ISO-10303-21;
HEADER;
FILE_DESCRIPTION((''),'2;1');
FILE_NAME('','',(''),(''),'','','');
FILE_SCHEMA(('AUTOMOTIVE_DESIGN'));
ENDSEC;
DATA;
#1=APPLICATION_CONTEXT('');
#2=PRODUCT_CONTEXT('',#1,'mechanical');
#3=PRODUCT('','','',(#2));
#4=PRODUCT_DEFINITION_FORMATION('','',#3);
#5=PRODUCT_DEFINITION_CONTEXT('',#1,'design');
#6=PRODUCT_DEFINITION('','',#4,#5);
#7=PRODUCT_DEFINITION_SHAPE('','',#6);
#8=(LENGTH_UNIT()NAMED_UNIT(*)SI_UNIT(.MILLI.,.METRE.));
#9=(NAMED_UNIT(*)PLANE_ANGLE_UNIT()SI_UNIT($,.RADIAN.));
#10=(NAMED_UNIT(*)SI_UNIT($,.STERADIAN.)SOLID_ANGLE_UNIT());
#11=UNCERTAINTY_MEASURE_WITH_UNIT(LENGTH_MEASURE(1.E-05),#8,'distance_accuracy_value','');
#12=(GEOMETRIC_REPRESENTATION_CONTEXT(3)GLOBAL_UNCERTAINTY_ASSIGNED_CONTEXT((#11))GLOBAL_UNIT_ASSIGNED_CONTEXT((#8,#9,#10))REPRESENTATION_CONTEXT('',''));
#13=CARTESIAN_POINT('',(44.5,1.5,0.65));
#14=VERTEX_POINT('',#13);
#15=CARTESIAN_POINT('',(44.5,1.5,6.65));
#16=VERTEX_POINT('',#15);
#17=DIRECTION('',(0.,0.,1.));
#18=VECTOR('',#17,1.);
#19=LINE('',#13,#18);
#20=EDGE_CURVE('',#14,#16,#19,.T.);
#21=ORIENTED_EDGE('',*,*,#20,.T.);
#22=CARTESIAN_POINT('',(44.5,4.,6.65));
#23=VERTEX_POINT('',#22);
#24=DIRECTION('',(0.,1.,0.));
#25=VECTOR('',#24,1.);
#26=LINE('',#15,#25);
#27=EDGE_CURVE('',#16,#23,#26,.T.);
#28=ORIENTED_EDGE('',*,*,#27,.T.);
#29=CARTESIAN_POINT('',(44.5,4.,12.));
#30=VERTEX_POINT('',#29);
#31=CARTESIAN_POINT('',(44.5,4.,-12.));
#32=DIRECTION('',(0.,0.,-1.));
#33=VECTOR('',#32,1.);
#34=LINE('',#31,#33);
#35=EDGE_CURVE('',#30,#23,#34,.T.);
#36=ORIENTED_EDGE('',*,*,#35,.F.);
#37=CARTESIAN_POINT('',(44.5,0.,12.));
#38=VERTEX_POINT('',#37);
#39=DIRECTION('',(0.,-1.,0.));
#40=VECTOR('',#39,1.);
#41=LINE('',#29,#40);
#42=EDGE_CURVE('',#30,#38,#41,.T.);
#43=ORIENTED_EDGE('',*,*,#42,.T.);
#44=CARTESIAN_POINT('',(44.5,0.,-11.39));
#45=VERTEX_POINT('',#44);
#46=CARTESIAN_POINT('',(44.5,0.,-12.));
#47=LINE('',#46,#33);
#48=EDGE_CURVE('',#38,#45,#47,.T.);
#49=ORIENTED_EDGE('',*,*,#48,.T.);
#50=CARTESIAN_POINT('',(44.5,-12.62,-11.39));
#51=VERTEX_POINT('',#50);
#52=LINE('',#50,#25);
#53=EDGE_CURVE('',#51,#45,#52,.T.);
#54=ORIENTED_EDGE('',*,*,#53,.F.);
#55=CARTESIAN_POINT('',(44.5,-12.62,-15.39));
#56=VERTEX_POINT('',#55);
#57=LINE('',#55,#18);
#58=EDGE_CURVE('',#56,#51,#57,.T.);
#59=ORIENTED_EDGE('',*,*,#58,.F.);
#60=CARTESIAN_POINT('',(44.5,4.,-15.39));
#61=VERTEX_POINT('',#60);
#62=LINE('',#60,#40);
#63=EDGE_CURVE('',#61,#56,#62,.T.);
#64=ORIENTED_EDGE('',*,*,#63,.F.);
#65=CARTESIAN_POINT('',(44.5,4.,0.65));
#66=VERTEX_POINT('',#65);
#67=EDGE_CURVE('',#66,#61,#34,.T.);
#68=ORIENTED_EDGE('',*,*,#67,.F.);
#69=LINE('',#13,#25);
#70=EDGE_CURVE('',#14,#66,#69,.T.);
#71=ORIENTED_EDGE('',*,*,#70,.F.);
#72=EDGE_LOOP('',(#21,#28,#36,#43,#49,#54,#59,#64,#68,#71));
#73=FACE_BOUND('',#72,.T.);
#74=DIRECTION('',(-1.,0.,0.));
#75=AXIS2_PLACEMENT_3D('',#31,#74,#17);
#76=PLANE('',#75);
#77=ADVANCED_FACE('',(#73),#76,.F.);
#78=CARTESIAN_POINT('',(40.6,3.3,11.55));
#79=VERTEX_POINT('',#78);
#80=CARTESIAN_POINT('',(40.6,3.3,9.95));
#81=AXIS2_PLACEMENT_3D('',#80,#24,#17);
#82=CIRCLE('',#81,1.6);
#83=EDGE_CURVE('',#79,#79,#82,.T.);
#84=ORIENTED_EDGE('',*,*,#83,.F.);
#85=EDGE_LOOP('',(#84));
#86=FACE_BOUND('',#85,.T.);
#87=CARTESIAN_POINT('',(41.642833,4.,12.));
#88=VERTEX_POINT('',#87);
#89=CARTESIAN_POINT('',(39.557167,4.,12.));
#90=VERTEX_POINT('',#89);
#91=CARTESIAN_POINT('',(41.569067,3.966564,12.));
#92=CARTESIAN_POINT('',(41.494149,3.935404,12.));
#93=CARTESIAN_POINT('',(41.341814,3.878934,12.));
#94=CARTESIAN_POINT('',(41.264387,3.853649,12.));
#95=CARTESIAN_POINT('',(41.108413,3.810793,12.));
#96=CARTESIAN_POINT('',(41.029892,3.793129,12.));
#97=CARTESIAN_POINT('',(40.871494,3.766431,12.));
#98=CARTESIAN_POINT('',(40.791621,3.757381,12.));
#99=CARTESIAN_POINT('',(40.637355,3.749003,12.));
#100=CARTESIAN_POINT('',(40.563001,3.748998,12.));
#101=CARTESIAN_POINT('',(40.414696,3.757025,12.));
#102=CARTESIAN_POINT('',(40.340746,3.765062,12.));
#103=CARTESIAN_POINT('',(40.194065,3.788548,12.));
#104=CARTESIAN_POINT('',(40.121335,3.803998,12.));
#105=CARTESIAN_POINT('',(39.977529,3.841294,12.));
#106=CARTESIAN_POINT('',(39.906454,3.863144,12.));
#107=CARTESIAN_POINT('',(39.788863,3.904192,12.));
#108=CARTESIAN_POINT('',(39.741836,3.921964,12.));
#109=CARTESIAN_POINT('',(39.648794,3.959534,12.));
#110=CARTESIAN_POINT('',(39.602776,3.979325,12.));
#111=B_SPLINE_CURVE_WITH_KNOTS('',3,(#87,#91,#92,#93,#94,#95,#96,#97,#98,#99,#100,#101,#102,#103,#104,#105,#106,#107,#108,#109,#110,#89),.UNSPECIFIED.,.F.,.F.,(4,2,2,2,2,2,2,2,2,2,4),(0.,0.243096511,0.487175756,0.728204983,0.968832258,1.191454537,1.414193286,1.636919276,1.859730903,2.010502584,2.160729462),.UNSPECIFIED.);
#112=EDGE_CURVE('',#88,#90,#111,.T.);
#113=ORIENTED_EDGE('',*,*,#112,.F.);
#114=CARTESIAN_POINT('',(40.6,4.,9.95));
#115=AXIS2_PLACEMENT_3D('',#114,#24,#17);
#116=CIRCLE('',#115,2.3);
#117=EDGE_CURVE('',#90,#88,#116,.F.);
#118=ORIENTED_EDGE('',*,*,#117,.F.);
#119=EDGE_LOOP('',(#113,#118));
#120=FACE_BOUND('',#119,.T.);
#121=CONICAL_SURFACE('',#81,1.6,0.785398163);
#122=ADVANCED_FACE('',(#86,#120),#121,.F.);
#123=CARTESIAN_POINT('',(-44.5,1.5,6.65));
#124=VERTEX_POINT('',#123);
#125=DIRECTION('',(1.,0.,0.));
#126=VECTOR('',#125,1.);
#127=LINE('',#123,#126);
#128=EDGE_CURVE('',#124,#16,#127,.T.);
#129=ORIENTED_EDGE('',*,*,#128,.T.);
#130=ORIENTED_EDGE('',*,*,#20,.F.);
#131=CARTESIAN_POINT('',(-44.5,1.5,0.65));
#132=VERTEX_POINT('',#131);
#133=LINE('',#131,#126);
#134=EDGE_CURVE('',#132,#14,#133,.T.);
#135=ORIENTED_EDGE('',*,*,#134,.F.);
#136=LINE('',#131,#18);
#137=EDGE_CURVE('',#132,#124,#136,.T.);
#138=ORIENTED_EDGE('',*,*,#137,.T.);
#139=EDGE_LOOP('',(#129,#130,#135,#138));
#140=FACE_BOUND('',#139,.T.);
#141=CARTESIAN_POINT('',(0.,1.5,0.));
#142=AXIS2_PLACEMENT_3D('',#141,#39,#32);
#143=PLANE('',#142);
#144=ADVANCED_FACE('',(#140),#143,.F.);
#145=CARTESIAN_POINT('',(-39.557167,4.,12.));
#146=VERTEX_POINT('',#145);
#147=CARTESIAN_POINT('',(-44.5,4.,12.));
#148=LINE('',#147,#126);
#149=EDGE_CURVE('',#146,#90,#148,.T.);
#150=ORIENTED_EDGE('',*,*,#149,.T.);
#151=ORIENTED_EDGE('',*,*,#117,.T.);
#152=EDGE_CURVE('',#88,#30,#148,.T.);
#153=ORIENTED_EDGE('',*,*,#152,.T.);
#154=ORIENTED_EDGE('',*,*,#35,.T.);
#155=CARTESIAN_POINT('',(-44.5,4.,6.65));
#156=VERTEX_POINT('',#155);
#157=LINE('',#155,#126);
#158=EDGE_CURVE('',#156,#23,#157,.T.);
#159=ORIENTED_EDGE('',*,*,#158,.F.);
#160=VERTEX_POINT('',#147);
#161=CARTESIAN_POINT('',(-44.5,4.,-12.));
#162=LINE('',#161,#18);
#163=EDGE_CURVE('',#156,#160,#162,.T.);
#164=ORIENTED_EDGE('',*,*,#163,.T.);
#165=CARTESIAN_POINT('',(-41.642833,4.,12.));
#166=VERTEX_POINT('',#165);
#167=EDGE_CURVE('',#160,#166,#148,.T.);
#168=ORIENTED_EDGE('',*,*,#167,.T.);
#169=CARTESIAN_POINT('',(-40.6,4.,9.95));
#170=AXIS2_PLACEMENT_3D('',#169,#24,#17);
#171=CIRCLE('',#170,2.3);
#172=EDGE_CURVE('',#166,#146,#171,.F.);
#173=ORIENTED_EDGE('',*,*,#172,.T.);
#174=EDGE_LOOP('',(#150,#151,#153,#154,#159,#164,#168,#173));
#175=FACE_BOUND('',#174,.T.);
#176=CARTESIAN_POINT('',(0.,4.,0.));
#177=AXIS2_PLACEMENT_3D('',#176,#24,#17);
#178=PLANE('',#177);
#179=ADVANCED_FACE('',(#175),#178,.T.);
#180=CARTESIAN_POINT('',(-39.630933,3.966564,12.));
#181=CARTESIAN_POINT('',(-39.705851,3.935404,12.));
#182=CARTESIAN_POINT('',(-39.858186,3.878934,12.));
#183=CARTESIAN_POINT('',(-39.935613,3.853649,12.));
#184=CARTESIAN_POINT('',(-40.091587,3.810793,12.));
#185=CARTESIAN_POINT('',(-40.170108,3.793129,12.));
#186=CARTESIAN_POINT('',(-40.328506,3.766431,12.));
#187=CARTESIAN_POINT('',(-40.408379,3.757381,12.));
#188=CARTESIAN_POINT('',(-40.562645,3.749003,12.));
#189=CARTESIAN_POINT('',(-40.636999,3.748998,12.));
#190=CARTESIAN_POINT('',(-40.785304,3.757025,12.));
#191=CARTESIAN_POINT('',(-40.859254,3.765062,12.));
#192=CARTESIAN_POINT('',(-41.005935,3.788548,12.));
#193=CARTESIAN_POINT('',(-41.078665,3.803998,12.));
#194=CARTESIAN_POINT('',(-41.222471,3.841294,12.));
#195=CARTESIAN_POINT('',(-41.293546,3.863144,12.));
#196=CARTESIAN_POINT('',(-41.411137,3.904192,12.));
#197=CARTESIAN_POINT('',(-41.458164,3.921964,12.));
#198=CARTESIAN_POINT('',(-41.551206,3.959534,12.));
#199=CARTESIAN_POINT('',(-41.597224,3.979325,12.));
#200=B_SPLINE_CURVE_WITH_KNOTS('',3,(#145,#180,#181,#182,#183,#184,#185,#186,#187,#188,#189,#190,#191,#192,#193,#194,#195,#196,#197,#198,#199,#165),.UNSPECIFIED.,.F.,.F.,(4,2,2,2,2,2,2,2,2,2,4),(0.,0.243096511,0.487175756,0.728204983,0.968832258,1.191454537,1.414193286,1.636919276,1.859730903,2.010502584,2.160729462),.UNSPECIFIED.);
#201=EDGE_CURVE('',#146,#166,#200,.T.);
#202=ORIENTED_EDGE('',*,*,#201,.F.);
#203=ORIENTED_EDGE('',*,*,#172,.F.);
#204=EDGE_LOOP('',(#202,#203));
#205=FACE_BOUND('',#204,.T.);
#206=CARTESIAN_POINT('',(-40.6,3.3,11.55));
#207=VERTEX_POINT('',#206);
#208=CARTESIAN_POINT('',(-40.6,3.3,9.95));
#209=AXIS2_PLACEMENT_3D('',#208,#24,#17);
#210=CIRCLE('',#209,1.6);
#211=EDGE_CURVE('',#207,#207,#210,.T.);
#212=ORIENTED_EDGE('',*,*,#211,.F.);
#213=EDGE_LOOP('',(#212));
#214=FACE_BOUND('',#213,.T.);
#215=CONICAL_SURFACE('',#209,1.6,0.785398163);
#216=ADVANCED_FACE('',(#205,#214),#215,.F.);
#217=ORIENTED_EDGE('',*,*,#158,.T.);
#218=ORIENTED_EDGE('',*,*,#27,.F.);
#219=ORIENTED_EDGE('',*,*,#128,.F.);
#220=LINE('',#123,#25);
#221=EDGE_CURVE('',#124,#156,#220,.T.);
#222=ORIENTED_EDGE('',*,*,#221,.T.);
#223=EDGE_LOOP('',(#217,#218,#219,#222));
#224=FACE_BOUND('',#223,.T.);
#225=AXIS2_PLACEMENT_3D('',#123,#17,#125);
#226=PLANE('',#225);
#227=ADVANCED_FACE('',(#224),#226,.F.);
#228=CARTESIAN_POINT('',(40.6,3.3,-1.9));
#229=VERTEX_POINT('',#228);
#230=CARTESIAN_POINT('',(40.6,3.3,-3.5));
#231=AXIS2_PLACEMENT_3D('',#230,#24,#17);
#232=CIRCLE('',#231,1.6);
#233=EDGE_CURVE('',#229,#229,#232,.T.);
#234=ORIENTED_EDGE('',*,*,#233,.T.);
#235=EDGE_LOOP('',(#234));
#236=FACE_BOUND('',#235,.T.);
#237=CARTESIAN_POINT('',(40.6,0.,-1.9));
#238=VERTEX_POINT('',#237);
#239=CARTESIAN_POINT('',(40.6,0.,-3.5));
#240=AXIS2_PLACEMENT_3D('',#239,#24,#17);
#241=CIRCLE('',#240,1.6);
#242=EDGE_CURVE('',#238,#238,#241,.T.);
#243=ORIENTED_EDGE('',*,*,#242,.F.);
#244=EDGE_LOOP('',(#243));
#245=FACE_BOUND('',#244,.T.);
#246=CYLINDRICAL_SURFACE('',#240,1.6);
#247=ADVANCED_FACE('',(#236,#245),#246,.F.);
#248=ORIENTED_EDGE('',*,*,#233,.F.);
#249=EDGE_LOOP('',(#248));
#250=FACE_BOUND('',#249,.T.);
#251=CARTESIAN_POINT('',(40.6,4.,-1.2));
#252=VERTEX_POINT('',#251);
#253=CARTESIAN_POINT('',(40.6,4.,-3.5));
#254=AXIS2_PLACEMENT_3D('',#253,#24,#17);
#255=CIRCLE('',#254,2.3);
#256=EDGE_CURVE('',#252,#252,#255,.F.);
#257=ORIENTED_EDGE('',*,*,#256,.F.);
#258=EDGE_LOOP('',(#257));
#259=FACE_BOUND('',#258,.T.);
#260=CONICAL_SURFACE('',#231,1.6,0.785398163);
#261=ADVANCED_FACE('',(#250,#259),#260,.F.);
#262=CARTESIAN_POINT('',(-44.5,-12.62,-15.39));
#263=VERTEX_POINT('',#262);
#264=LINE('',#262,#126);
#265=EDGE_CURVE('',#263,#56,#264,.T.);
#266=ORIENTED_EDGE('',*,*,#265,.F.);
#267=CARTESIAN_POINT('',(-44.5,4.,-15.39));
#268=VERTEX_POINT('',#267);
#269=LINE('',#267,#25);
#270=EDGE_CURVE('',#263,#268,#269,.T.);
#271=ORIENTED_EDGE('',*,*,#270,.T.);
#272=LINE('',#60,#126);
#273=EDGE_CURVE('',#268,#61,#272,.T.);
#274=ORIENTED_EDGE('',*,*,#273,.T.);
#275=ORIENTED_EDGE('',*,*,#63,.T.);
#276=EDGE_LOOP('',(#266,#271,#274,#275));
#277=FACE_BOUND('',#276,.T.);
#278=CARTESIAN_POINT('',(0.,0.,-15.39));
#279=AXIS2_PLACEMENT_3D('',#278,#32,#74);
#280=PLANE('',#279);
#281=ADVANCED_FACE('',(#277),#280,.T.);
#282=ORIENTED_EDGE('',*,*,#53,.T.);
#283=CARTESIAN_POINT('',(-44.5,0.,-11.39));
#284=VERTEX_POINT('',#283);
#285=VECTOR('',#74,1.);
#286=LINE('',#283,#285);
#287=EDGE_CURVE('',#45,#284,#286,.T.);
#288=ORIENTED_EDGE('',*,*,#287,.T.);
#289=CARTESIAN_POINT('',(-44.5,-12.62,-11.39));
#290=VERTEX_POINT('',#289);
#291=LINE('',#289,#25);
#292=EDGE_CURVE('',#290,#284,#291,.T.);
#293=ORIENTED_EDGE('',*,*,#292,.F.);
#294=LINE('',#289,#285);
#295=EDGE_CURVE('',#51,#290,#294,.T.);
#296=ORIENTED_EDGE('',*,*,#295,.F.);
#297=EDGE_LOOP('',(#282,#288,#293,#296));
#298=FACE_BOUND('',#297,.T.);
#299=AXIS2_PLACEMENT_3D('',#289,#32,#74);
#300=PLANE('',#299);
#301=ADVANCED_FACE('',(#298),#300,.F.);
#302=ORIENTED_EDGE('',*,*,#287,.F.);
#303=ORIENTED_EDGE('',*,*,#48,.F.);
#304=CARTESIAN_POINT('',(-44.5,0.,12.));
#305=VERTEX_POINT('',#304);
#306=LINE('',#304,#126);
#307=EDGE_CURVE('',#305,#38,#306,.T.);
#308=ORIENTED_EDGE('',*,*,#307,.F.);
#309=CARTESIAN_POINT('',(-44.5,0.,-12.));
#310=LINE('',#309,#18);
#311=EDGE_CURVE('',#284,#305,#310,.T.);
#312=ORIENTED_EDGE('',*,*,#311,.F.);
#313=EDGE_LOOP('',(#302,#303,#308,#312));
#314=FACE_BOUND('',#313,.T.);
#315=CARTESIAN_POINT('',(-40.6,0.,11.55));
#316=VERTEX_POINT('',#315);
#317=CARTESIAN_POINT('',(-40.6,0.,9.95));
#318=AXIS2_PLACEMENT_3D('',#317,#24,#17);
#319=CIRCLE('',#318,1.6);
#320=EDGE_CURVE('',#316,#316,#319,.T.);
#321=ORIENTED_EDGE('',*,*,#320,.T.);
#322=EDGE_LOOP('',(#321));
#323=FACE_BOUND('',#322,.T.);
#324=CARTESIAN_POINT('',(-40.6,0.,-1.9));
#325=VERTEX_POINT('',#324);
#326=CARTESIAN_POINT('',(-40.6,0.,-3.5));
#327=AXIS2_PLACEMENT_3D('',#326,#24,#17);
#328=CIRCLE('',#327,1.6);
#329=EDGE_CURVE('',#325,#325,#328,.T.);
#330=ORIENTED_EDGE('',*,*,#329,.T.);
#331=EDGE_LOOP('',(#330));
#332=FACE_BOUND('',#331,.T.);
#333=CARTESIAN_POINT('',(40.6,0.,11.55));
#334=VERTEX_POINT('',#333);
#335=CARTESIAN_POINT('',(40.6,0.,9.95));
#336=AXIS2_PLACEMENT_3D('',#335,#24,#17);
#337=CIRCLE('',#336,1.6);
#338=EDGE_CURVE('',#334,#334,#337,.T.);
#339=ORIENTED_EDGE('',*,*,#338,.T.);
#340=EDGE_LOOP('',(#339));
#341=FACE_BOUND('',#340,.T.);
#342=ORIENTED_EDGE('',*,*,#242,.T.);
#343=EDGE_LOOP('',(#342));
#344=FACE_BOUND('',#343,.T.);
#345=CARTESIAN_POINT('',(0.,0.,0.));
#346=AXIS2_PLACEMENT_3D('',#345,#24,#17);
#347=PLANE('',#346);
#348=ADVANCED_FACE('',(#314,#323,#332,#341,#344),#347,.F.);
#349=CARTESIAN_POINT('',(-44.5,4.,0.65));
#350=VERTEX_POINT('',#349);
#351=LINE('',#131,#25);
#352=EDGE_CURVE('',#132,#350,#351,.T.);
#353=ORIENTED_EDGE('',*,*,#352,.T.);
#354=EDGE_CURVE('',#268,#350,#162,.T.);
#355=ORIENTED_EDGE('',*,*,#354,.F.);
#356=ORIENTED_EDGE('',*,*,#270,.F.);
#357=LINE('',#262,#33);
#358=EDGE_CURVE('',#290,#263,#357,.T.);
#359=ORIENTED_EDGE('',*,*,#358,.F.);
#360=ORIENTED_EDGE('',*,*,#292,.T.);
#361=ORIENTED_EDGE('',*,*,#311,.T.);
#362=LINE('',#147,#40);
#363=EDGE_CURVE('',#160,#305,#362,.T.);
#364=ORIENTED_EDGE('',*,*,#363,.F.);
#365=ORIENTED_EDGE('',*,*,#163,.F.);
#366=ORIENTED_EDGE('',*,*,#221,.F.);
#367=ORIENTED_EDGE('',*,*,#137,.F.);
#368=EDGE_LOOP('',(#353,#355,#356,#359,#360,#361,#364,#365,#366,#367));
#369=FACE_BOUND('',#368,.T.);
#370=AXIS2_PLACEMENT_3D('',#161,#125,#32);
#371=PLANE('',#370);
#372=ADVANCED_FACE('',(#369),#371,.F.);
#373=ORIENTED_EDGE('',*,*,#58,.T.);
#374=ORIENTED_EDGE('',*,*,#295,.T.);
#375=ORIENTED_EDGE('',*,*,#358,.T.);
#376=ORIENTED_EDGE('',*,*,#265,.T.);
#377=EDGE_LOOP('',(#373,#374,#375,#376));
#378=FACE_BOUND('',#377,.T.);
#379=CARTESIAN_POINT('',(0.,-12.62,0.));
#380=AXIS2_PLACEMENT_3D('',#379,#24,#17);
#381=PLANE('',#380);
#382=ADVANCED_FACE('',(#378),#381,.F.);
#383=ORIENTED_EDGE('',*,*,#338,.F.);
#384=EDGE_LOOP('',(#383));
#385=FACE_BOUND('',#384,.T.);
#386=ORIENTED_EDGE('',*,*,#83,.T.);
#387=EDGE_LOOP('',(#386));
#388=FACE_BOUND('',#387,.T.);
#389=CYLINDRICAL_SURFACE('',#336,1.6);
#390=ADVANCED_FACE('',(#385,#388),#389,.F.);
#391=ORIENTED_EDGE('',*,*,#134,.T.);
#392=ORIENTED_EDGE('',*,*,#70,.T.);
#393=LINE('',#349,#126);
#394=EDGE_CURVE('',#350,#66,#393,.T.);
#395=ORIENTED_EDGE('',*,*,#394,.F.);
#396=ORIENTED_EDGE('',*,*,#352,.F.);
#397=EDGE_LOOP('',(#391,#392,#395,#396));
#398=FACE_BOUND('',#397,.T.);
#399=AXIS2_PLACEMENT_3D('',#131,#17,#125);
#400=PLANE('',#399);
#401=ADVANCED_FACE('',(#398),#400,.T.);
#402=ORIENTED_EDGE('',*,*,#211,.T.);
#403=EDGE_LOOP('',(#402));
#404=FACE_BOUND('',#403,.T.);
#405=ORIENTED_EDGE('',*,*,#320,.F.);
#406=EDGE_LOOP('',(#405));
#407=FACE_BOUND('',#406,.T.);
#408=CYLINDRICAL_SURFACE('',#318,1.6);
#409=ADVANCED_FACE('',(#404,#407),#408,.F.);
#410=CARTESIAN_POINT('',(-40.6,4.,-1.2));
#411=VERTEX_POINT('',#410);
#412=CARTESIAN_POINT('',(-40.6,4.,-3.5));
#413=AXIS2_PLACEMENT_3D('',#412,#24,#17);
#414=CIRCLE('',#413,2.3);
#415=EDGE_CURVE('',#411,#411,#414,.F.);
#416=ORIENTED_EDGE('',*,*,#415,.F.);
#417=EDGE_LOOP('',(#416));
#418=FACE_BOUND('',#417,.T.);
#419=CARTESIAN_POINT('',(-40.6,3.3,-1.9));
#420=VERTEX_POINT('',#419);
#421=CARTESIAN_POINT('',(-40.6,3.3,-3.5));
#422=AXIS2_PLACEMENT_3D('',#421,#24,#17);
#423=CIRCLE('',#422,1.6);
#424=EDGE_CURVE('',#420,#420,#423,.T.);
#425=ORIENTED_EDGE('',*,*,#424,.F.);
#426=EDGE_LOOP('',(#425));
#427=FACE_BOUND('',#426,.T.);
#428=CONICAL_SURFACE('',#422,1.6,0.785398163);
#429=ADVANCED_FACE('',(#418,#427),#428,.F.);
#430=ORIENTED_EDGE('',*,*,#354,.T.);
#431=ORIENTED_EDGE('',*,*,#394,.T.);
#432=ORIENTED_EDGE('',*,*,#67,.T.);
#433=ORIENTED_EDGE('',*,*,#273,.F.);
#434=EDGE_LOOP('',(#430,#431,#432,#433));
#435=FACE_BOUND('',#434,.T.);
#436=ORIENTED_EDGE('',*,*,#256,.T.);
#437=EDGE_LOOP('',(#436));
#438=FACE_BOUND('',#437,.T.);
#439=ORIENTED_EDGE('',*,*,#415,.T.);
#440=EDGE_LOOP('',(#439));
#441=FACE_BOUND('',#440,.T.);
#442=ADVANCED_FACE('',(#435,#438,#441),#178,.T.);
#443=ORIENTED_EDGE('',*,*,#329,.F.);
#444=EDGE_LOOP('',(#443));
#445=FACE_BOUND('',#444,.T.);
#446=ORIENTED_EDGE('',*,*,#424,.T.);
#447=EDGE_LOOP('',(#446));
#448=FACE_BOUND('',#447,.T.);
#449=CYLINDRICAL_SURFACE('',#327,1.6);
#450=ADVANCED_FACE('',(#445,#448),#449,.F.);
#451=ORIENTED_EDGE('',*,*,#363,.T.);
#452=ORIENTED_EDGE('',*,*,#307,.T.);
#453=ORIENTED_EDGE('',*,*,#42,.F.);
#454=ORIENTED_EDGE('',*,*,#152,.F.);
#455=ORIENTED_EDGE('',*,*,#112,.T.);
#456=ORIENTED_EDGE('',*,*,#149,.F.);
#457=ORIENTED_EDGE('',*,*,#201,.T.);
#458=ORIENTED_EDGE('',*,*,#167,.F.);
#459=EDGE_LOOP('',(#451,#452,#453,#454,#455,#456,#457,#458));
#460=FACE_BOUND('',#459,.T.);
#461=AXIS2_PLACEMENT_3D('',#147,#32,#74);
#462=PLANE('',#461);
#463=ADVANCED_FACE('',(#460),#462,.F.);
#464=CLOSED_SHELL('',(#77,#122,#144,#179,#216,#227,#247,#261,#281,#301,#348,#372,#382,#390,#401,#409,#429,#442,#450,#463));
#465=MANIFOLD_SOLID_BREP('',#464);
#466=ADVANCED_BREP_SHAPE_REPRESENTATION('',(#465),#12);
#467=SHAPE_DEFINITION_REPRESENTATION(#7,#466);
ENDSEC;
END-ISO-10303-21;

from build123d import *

# Parameters (mm, degrees)
SKETCH1_W           = 89
SKETCH1_H           = 24
BOSS_EXTRUDE1_DEPTH = 4
SKETCH2_R           = 1.6
CUT_EXTRUDE1_DEPTH  = 47.262836057
CHAMFER1_SIZE       = 0.7
SKETCH3_W           = 89
SKETCH3_H           = 6
CUT_EXTRUDE2_DEPTH  = 2.5
SKETCH4_W           = 89
SKETCH4_H           = 4
BOSS_EXTRUDE2_DEPTH = 3.39
SKETCH5_W           = 89
SKETCH5_H           = 4
BOSS_EXTRUDE3_DEPTH = 12.62


with BuildPart() as part:
    # Sketch1 → Boss-Extrude1 (new body)
    with BuildSketch(Plane(origin=(0, 0, 0), x_dir=(1, 0, 0), z_dir=(0, 1, 0))):
        Rectangle(SKETCH1_W, SKETCH1_H)
    extrude(amount=BOSS_EXTRUDE1_DEPTH)

    # Sketch2 → Cut-Extrude1 (cut, through all)
    with BuildSketch(Plane(origin=(0, 4, 0), x_dir=(1, 0, 0), z_dir=(0, 1, 0))):
        with Locations(Location((-40.6, 3.5, 0), (0, 0, 270))):
            Circle(SKETCH2_R)
        with Locations(Location((-40.6, -9.95, 0), (0, 0, 270))):
            Circle(SKETCH2_R)
        with Locations(Location((40.6, 3.5, 0), (0, 0, 270))):
            Circle(SKETCH2_R)
        with Locations(Location((40.6, -9.95, 0), (0, 0, 270))):
            Circle(SKETCH2_R)
    extrude(amount=-CUT_EXTRUDE1_DEPTH, mode=Mode.SUBTRACT)

    # Chamfer1
    # the kernel refuses this chamfer: 0.7 mm, written as the material it takes off along each edge
    with BuildSketch(Plane(origin=(40.6, 4, 9.95), x_dir=(0, 0, 1), z_dir=(-1, 0, 0))) as chamfer1_piece_1:
        Polygon((1.6 + CHAMFER1_SIZE, 0), (1.6, -CHAMFER1_SIZE), (1.6, 0), align=None)
    revolve(axis=Axis((40.6, 4, 9.95), (0, 1, 0)), mode=Mode.SUBTRACT)
    with BuildSketch(Plane(origin=(-40.6, 4, -3.5), x_dir=(0, 0, 1), z_dir=(-1, 0, 0))) as chamfer1_piece_2:
        Polygon((1.6 + CHAMFER1_SIZE, 0), (1.6, -CHAMFER1_SIZE), (1.6, 0), align=None)
    revolve(axis=Axis((-40.6, 4, -3.5), (0, 1, 0)), mode=Mode.SUBTRACT)
    with BuildSketch(Plane(origin=(40.6, 4, -3.5), x_dir=(0, 0, 1), z_dir=(-1, 0, 0))) as chamfer1_piece_3:
        Polygon((1.6 + CHAMFER1_SIZE, 0), (1.6, -CHAMFER1_SIZE), (1.6, 0), align=None)
    revolve(axis=Axis((40.6, 4, -3.5), (0, 1, 0)), mode=Mode.SUBTRACT)
    with BuildSketch(Plane(origin=(-40.6, 4, 9.95), x_dir=(0, 0, 1), z_dir=(-1, 0, 0))) as chamfer1_piece_4:
        Polygon((1.6 + CHAMFER1_SIZE, 0), (1.6, -CHAMFER1_SIZE), (1.6, 0), align=None)
    revolve(axis=Axis((-40.6, 4, 9.95), (0, 1, 0)), mode=Mode.SUBTRACT)

    # Sketch3 → Cut-Extrude2 (cut)
    with BuildSketch(Plane(origin=(0, 4, 0), x_dir=(1, 0, 0), z_dir=(0, 1, 0))):
        with Locations((0, -3.65)):
            Rectangle(SKETCH3_W, SKETCH3_H)
    extrude(amount=-CUT_EXTRUDE2_DEPTH, mode=Mode.SUBTRACT)

    # Sketch4 → Boss-Extrude2 (add)
    with BuildSketch(Plane(origin=(0, 0, -12), x_dir=(-1, 0, 0), z_dir=(0, 0, -1))):
        with Locations((0, 2)):
            Rectangle(SKETCH4_W, SKETCH4_H)
    extrude(amount=BOSS_EXTRUDE2_DEPTH)

    # Sketch5 → Boss-Extrude3 (add)
    with BuildSketch(Plane.XZ):
        with Locations((0, -13.39)):
            Rectangle(SKETCH5_W, SKETCH5_H)
    extrude(amount=BOSS_EXTRUDE3_DEPTH)


solid = part.part
